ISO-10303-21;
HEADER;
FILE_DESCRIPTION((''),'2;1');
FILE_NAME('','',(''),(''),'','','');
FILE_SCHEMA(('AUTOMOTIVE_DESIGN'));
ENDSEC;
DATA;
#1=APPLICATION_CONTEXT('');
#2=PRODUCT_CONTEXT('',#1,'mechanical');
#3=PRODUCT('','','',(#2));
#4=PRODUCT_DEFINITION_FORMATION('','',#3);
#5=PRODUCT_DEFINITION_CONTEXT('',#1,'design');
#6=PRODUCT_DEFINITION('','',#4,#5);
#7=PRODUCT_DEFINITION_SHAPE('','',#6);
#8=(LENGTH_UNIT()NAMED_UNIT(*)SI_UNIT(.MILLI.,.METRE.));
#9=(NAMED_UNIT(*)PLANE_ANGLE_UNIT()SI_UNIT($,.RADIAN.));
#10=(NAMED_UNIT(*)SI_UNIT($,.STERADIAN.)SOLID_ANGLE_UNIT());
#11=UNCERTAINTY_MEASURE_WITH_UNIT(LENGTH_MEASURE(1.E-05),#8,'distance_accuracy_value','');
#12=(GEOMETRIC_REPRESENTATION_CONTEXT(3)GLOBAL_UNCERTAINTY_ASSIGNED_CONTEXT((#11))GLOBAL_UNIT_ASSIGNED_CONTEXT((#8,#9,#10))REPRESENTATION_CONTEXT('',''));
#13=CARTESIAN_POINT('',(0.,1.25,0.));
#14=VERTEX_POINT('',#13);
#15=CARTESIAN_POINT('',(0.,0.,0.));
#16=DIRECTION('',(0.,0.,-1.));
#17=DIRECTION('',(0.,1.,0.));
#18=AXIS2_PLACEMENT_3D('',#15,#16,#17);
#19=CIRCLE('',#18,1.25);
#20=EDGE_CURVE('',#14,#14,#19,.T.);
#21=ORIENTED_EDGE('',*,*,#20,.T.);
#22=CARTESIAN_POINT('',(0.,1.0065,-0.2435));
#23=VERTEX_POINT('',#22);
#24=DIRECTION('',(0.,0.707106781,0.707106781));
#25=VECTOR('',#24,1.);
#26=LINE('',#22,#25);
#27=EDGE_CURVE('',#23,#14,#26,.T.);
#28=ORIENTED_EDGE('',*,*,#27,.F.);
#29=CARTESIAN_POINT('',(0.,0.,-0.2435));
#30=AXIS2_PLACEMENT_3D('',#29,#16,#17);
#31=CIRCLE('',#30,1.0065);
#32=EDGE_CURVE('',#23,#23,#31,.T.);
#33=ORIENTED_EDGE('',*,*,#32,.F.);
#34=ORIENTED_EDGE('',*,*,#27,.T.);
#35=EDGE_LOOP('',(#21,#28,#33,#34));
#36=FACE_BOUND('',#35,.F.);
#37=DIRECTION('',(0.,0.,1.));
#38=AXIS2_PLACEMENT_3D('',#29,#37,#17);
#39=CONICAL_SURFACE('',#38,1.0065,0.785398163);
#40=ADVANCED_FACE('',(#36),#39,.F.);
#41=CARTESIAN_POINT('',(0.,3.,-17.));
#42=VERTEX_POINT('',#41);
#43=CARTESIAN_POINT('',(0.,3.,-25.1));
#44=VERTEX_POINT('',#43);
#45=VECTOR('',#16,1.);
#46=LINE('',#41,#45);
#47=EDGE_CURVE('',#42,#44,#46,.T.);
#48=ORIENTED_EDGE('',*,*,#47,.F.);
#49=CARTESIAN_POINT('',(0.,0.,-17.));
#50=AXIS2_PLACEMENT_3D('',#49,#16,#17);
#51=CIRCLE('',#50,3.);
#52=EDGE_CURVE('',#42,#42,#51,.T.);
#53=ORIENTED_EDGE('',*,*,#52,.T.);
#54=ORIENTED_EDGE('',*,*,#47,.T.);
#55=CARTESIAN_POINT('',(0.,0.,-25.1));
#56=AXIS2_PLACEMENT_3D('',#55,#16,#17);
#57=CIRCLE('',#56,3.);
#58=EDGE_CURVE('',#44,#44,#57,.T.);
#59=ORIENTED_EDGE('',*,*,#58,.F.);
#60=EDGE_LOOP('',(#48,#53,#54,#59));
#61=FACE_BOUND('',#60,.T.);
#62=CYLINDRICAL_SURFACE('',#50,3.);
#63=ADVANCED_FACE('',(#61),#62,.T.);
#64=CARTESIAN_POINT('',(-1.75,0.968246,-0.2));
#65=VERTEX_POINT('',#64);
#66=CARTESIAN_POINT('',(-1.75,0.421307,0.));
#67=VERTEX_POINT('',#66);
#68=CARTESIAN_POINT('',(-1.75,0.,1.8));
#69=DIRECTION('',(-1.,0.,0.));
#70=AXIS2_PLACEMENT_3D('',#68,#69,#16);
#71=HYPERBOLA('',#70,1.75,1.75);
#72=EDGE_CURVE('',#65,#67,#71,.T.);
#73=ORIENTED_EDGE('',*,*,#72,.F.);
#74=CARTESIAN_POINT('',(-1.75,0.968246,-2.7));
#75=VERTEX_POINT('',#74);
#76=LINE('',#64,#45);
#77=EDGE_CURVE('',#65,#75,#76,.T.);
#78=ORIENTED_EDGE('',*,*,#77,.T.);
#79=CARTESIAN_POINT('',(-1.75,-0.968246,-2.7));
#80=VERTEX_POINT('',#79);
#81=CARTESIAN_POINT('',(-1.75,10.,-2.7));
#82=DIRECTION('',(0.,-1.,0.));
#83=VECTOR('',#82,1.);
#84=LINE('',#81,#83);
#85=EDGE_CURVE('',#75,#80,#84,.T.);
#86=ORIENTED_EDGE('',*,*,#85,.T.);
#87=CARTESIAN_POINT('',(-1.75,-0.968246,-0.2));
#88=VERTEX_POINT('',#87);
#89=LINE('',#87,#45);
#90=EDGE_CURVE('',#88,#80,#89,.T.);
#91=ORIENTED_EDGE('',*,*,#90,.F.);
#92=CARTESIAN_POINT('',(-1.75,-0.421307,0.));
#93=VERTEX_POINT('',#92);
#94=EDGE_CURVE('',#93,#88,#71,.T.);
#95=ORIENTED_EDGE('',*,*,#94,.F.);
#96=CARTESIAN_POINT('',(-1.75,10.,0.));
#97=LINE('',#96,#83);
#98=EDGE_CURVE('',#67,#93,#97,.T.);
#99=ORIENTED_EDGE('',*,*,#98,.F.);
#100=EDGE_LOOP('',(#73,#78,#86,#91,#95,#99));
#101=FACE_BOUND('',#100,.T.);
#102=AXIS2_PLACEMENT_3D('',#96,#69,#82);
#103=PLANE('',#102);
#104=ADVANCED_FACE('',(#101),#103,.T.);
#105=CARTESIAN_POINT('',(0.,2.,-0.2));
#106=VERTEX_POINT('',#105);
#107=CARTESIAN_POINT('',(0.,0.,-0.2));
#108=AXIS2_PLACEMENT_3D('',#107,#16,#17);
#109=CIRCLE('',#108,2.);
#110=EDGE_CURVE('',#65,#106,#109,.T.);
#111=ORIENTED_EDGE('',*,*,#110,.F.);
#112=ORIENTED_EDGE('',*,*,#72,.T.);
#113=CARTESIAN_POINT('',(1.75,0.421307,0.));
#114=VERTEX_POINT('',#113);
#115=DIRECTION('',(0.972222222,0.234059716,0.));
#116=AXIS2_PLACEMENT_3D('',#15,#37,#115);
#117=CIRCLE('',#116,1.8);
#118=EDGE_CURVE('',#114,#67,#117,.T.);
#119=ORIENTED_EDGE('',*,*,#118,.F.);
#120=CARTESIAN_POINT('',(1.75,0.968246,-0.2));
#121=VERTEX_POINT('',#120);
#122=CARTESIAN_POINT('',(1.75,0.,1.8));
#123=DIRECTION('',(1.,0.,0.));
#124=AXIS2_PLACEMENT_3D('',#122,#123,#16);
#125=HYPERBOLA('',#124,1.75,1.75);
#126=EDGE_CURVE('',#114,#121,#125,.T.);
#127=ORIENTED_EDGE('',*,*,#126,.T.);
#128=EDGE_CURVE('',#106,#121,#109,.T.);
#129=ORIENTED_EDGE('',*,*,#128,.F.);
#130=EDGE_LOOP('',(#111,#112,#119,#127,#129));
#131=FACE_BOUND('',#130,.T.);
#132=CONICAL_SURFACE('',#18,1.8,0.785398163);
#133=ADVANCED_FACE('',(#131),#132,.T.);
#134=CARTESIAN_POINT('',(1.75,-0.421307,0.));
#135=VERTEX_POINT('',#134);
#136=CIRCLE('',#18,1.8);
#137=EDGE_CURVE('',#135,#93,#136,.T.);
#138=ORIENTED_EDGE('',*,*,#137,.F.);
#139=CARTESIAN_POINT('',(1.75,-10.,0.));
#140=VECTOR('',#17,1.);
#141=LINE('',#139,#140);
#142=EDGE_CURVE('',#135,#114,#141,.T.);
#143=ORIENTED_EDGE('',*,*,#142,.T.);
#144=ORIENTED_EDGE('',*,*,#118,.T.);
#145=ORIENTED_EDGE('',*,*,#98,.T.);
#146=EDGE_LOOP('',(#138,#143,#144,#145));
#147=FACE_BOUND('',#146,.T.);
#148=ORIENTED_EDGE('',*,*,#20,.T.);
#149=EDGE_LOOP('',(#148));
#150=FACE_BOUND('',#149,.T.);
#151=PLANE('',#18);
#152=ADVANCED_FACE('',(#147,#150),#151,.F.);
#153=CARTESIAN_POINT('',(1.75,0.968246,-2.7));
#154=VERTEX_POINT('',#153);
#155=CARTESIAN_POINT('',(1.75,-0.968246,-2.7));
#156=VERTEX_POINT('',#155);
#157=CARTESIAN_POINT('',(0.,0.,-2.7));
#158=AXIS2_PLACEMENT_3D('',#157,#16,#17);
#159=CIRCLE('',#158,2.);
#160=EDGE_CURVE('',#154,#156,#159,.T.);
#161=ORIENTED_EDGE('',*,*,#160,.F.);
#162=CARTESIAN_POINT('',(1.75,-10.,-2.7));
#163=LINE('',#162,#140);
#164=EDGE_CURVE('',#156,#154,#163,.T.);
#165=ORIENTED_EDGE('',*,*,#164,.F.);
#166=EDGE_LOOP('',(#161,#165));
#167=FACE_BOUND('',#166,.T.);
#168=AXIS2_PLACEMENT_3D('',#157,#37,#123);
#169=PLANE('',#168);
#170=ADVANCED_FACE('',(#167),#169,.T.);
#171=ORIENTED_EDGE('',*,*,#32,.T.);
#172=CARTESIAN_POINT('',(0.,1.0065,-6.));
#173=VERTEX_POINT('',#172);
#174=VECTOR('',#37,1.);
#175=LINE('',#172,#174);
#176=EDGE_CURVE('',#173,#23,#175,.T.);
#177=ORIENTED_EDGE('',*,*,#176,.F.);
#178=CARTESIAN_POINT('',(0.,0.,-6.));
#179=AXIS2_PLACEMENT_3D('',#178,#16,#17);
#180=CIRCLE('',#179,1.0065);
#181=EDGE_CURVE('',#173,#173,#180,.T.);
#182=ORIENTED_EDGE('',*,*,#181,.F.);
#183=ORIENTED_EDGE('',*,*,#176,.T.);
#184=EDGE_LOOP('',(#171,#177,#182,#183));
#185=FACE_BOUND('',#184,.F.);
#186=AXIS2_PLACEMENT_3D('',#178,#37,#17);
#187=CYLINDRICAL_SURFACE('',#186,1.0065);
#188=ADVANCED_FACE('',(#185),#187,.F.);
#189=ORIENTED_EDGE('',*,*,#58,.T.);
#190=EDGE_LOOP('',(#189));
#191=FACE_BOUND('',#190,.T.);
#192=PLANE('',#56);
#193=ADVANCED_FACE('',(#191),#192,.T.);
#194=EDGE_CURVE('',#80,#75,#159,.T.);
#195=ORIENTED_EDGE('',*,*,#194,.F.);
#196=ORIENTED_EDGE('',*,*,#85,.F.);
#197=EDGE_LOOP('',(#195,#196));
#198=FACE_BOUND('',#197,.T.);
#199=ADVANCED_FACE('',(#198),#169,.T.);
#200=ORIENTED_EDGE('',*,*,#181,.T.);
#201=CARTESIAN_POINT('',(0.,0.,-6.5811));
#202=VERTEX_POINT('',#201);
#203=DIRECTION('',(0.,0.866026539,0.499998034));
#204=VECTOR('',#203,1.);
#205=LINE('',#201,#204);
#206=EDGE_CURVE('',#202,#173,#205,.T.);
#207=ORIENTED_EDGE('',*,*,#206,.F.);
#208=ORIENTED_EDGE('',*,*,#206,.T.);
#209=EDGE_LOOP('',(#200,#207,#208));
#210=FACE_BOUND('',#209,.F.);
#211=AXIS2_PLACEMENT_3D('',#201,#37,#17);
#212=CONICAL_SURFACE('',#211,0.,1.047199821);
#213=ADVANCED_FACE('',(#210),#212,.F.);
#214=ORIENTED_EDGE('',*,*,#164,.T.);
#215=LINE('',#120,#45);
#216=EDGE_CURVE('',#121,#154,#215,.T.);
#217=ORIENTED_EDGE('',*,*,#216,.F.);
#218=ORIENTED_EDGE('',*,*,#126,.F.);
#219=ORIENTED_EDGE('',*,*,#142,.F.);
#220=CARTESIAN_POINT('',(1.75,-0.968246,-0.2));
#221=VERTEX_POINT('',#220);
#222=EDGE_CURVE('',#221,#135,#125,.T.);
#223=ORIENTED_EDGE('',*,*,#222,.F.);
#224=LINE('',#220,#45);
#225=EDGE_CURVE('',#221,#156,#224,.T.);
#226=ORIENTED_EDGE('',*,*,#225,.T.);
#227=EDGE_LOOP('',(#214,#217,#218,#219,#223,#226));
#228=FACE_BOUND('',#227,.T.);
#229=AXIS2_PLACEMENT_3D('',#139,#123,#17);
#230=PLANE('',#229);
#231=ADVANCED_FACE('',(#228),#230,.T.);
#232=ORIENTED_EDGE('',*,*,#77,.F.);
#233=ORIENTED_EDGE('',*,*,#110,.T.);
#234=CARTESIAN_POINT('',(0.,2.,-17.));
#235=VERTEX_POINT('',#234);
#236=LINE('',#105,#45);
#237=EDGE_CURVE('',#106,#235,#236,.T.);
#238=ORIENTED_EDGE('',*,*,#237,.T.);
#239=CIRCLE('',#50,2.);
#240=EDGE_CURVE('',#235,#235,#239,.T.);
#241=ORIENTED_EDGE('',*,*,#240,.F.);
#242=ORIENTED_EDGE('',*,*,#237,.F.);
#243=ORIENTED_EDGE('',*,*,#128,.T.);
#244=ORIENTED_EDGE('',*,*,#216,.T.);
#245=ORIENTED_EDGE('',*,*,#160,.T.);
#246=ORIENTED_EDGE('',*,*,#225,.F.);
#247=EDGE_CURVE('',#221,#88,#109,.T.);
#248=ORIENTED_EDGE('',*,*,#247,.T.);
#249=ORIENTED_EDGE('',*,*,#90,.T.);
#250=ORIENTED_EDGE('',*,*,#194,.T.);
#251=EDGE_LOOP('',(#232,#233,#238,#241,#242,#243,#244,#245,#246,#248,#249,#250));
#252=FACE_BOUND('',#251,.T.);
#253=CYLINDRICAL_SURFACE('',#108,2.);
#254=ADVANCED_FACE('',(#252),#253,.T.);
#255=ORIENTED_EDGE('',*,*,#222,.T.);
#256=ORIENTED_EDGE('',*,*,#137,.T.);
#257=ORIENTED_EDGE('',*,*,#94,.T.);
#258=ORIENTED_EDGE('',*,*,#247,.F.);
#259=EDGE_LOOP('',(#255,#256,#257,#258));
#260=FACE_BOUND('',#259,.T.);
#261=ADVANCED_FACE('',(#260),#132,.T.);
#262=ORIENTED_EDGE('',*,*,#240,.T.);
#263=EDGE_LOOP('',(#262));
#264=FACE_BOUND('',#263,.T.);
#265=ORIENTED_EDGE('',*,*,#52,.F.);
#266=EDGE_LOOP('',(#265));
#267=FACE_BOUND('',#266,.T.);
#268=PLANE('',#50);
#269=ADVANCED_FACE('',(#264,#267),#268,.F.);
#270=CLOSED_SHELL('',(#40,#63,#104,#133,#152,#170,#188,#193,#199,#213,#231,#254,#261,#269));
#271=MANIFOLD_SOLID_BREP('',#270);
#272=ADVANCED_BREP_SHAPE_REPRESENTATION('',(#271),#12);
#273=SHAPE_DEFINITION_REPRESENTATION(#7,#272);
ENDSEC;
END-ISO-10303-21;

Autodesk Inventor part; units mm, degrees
sketch "Sketch_1" plane through (0, 0, 0) normal (1, 0, 0) x (0, 1, 0)
  line L0 (0, -25.1) -> (0, -6.5811)
  line L1 (0, -6.5811) -> (1.0065, -6)
  line L2 (1.0065, -6) -> (1.0065, -0.2435)
  line L3 (1.0065, -0.2435) -> (1.25, 0)
  line L4 (1.25, 0) -> (1.8, 0)
  line L5 (1.8, 0) -> (2, -0.2)
  line L6 (2, -0.2) -> (2, -17)
  line L7 (2, -17) -> (3, -17)
  line L8 (3, -17) -> (3, -25.1)
  line L9 (3, -25.1) -> (0, -25.1)
  line L10 (0, -25.1) -> (0, -6.5811)
revolve "Revolution1" add sketch "Sketch_1" angle 360 about axis through (0, 0, -25.1) along (0, 0, -1)
thread "Thread1" size "M2.5x0.45" class "6H" standard "ISO Metric profile" length 4.7565
sketch "Sketch_2" plane through (0, 0, 0) normal (0, 0, 1) x (1, 0, 0)
  line L0 (-3.5, 15) -> (-3.5, -15)
  line L1 (-3.5, -15) -> (3.5, -15)
  line L2 (3.5, -15) -> (3.5, 15)
  line L3 (3.5, 15) -> (-3.5, 15)
  line L4 (-1.75, 10) -> (-1.75, -10)
  line L5 (-1.75, -10) -> (1.75, -10)
  line L6 (1.75, -10) -> (1.75, 10)
  line L7 (1.75, 10) -> (-1.75, 10)
extrude "Extrusion1" cut sketch "Sketch_2" against normal blind 2.7
ref_plane "ANBAU_XY" through (0, 0, -25.1) normal (0, 0, -1) x (1, 0, 0)
ref_plane "ANBAU_YZ" through (0, 0, -25.1) normal (1, 0, 0) x (0, -1, 0)
ref_plane "ANBAU_ZX" through (0, 0, -25.1) normal (0, -1, 0) x (0, 0, -1)
properties part number "5267300 AEN-S-6-5-I-A---(highP)"
